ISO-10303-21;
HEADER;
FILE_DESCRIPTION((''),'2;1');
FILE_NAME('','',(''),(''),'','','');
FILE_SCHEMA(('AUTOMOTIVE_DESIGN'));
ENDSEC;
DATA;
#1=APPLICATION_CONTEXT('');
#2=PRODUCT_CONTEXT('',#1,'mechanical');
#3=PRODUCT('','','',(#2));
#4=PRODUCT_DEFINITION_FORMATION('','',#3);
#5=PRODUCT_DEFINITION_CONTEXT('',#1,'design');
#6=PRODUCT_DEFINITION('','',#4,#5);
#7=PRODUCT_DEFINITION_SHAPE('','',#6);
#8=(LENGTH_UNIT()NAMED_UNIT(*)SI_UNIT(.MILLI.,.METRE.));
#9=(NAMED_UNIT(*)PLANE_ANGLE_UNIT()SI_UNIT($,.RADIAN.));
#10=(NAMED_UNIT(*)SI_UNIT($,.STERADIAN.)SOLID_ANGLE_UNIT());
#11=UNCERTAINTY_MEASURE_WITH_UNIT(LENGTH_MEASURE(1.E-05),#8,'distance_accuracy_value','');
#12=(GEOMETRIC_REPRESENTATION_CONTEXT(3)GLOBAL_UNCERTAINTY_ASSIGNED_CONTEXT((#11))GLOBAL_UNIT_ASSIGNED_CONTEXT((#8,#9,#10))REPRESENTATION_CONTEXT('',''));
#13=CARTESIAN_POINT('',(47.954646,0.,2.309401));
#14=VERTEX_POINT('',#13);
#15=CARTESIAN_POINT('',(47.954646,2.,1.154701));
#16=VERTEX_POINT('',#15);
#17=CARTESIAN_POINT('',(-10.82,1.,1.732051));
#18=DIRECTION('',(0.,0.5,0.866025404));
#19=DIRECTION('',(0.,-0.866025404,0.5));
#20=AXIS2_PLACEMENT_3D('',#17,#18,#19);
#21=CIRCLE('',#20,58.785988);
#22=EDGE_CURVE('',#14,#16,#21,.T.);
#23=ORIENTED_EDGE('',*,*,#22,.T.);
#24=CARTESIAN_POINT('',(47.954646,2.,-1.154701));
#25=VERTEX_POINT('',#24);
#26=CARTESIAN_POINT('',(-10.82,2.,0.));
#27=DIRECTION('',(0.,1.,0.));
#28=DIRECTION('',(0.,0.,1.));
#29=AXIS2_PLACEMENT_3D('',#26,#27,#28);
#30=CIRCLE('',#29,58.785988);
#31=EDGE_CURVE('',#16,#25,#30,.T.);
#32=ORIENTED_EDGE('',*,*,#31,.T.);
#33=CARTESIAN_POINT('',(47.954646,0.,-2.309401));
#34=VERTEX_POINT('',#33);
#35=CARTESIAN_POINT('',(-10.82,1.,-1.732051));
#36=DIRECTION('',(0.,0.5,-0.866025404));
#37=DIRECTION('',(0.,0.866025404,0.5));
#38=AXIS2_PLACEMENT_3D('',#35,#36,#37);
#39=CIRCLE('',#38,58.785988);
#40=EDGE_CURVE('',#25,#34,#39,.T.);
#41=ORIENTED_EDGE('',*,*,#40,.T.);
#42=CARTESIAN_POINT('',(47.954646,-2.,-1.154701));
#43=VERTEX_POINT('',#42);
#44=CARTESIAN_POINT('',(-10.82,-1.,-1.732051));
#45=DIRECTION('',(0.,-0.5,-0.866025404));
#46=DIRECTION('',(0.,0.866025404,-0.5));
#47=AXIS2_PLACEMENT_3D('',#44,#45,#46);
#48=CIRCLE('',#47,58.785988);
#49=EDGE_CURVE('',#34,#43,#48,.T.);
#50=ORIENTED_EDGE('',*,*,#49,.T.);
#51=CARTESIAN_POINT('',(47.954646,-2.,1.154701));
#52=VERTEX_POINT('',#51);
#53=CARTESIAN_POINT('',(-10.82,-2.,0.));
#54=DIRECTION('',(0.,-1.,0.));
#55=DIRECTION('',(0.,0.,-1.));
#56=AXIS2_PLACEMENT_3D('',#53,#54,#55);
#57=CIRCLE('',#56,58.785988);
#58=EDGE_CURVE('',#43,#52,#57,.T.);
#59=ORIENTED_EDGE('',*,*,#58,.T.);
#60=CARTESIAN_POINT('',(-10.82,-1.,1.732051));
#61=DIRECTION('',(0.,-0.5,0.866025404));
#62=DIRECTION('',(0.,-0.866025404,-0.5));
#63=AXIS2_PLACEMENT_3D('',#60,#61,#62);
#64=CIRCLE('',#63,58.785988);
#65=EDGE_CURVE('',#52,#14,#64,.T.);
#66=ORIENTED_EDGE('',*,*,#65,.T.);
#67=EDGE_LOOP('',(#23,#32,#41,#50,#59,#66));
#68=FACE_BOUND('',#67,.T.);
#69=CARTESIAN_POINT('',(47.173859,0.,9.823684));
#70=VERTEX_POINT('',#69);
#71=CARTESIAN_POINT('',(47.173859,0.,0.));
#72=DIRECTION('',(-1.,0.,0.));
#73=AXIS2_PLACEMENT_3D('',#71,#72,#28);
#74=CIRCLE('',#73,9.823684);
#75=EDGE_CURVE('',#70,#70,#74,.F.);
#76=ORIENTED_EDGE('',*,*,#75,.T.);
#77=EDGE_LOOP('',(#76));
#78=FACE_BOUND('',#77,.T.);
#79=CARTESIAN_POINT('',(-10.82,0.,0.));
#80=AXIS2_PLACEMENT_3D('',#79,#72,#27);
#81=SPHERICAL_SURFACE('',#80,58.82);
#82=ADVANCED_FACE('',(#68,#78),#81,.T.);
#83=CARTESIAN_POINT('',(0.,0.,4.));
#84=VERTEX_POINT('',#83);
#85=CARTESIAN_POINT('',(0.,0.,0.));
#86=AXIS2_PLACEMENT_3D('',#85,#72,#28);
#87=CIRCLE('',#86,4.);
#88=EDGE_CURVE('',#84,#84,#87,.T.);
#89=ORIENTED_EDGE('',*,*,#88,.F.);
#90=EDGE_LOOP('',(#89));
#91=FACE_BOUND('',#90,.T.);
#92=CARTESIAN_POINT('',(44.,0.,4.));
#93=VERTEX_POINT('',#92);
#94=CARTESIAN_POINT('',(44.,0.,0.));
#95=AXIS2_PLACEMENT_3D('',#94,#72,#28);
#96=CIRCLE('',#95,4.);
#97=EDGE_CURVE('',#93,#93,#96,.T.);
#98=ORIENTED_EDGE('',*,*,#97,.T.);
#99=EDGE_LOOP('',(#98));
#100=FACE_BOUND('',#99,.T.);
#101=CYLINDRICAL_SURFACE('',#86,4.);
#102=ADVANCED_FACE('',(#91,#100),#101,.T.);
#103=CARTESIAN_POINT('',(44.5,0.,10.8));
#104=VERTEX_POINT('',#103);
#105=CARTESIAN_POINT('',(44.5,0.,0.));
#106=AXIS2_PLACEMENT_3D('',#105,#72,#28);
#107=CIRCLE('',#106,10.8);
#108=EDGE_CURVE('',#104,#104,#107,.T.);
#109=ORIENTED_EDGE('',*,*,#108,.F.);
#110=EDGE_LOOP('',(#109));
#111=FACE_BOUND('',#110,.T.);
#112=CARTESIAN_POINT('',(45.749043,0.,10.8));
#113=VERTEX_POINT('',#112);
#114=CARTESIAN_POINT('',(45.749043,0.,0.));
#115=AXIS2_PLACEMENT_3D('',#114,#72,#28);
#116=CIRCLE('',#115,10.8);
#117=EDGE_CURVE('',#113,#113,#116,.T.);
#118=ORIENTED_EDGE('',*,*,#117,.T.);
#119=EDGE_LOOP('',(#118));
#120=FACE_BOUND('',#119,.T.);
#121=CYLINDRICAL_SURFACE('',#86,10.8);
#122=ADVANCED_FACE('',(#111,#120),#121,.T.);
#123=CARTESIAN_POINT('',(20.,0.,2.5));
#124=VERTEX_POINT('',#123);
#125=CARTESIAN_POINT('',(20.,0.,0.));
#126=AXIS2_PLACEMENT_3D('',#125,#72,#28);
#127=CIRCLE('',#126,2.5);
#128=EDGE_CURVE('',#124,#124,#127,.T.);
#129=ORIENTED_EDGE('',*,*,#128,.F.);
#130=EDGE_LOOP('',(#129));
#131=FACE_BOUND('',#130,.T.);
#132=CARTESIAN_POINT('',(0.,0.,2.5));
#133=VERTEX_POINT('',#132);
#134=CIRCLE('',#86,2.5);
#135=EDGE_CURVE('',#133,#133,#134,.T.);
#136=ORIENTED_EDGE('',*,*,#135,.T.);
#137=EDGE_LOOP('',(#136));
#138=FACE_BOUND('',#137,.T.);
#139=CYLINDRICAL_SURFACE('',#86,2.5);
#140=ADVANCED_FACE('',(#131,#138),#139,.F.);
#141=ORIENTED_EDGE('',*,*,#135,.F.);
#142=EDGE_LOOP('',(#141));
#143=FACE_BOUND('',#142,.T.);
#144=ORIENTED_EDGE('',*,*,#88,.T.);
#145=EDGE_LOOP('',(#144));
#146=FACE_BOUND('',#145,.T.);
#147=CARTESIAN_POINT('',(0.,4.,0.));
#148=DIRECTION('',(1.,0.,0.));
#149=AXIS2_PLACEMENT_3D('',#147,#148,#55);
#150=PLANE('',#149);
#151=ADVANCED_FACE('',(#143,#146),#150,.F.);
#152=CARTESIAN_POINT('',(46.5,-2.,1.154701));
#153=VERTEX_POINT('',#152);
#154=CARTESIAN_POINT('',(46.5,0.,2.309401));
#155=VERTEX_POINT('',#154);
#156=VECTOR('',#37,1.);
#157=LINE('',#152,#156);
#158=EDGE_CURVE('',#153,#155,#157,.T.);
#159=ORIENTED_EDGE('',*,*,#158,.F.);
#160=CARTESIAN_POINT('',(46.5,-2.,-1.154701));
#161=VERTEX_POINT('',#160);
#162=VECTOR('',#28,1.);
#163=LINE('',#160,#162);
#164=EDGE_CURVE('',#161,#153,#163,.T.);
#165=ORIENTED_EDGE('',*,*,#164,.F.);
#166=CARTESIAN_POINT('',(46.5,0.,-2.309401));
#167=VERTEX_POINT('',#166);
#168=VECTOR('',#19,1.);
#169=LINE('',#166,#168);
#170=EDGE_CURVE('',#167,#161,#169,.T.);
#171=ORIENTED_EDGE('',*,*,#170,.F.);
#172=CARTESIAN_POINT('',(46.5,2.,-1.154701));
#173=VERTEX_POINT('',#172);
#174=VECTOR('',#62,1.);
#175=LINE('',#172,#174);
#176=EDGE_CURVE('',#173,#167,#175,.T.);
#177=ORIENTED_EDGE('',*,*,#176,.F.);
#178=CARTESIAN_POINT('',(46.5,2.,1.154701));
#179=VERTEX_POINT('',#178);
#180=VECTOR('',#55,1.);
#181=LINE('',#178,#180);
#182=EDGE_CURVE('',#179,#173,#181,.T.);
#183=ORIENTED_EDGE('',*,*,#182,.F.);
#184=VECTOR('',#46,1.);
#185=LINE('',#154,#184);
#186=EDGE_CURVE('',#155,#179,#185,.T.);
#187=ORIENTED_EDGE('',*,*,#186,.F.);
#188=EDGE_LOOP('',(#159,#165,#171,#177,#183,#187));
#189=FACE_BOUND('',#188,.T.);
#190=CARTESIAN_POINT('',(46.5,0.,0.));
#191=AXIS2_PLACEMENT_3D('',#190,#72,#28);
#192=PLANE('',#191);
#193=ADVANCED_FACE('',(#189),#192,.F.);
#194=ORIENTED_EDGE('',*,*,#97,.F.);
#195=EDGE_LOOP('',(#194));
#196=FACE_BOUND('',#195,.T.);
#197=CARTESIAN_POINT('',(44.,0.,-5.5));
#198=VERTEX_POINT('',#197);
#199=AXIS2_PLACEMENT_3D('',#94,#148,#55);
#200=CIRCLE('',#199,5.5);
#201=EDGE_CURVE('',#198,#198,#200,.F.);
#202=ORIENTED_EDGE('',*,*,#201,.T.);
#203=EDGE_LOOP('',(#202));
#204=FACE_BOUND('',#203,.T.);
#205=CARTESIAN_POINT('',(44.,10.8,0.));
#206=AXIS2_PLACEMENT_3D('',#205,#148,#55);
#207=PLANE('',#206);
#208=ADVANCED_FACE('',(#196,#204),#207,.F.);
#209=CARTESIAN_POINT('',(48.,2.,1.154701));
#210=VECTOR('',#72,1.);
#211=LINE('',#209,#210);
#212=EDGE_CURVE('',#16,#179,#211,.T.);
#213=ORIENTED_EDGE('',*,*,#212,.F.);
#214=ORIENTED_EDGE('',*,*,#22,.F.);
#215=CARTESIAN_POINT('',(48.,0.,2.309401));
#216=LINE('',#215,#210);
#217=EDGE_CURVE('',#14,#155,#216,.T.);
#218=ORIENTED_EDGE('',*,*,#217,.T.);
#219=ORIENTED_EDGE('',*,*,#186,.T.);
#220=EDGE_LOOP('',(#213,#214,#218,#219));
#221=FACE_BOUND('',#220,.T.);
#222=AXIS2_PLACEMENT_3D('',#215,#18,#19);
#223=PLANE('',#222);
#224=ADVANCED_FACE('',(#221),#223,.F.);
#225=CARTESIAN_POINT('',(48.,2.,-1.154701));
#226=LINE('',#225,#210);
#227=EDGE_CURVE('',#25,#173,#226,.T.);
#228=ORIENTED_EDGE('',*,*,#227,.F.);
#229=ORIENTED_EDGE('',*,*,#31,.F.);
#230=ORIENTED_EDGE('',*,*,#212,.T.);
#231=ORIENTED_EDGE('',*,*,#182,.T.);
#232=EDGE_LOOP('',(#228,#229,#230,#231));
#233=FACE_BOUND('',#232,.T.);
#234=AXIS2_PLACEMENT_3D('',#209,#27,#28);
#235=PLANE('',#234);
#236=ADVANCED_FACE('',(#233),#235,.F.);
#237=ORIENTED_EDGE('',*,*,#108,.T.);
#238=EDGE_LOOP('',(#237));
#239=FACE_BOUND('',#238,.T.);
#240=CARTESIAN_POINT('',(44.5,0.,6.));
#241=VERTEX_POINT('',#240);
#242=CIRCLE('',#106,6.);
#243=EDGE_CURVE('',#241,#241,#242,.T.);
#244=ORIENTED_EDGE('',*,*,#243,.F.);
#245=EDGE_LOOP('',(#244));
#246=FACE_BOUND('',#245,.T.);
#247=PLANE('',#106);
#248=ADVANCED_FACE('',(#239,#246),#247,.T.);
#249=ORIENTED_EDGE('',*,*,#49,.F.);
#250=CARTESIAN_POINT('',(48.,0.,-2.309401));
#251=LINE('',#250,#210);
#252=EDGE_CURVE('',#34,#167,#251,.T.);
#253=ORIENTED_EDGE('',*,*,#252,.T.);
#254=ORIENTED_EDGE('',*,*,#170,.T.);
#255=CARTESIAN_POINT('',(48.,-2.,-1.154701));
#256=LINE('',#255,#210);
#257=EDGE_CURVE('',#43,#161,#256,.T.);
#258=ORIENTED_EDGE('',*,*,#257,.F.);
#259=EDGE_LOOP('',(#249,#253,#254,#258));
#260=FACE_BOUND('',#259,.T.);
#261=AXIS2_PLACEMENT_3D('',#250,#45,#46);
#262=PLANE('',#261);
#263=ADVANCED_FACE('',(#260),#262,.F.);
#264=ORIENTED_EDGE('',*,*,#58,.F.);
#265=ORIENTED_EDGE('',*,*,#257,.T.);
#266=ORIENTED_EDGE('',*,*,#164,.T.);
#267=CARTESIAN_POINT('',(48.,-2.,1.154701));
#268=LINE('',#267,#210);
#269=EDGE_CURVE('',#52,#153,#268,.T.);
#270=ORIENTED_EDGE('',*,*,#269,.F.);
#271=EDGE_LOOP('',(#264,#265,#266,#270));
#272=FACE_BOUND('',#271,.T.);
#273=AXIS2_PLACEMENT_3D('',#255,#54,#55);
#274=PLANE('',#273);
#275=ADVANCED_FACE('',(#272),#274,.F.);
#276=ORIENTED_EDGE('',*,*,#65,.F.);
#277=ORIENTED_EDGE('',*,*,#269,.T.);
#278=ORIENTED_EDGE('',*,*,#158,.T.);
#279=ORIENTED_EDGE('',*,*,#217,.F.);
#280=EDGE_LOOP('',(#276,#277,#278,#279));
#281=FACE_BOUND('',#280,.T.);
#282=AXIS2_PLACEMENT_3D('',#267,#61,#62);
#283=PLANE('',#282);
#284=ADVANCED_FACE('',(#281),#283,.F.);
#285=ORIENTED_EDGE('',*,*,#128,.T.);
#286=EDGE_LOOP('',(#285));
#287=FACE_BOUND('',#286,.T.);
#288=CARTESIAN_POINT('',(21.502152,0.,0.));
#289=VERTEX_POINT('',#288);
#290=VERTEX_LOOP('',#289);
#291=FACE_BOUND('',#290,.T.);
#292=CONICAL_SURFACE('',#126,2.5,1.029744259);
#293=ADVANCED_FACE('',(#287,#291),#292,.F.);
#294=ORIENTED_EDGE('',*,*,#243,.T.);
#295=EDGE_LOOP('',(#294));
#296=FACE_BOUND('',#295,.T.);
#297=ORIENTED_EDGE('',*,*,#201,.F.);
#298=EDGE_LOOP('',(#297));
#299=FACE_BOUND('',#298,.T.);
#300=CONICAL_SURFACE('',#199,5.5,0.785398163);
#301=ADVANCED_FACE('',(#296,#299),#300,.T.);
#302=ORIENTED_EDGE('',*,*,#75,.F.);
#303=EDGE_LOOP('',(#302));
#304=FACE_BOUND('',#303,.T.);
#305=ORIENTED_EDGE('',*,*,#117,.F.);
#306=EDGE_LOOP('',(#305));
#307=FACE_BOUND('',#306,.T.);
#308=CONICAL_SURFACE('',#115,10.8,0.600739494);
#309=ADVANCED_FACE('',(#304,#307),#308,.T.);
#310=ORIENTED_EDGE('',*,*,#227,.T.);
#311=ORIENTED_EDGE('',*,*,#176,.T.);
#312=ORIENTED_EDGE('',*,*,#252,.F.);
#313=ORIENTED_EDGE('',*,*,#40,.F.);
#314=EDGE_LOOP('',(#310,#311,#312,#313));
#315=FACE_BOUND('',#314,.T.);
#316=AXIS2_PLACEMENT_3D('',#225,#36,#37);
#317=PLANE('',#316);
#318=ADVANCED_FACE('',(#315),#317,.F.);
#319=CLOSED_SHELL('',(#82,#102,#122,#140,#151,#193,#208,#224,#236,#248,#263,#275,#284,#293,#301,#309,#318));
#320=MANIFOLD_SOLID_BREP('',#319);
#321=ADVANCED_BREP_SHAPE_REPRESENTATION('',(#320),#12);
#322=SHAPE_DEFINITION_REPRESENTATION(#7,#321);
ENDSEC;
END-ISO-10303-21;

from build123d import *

# Parameters (mm, degrees)
M6_TAPPED_HOLE1_D     = 5
M6_TAPPED_HOLE1_DEPTH = 20
M6_TAPPED_HOLE1_TIP   = 1.502151548
CHAMFER1_SIZE         = 1.25095704
SKETCH8_R             = 10.8
SKETCH8_R_2           = 6
CUT_EXTRUDE2_DEPTH    = 0.5
CHAMFER2_SIZE         = 0.5
CUT_EXTRUDE3_START    = -2
CUT_EXTRUDE3_DEPTH    = 46.048166808


# Some blends are built 0.0001 mm under size
with BuildPart() as part:
    # Sketch1 → Revolve1 (revolve)
    with BuildSketch(Plane.XY, mode=Mode.PRIVATE) as revolve1_sk:
        with BuildLine():
            Line((0, 0), (48, 0))
            ThreePointArc((48, 0), (47.749466448, 5.423098745), (47, 10.8))
            Line((47, 10.8), (44, 10.8))
            Line((44, 10.8), (44, 4))
            Line((44, 4), (0, 4))
            Line((0, 4), (0, 0))
        make_face()
    revolve(revolve1_sk.sketch.rotate(Axis((0, 0, 0), (1, 0, 0)), 90), axis=Axis((0, 0, 0), (1, 0, 0)))

    # M6 Tapped Hole1
    with Locations(Plane.ZY):
        with Locations((0, 0)):
            Hole(M6_TAPPED_HOLE1_D / 2, depth=M6_TAPPED_HOLE1_DEPTH)
            with Locations((0, 0, -(M6_TAPPED_HOLE1_DEPTH + M6_TAPPED_HOLE1_TIP / 2))):  # 118° drill point
                Cone(0, M6_TAPPED_HOLE1_D / 2, M6_TAPPED_HOLE1_TIP, mode=Mode.SUBTRACT)

    # Chamfer1
    # the kernel refuses this chamfer: 1.25095704, 1 mm, written as the material it takes off along each edge
    with BuildSketch(Plane(origin=(47, 0, 0), x_dir=(0, 0, 1), z_dir=(0, 1, 0))) as chamfer1_piece_1:
        with BuildLine():
            Line((9.823683565, 0.173858651), (10.8, -CHAMFER1_SIZE))
            Line((10.8, -CHAMFER1_SIZE), (10.8, 0))
            ThreePointArc((10.8, 0), (10.294942592, 0.092058822), (9.823683565, 0.173858651))
        make_face()
    revolve(axis=Axis((47, 0, 0), (1, 0, 0)), mode=Mode.SUBTRACT)

    # Sketch8 → Cut-Extrude2 (cut)
    with BuildSketch(Plane.ZY.offset(-44)):
        Circle(SKETCH8_R)
        Circle(SKETCH8_R_2, mode=Mode.SUBTRACT)
    extrude(amount=-CUT_EXTRUDE2_DEPTH, mode=Mode.SUBTRACT)

    # Chamfer2
    chamfer2_edges = [part.edges().sort_by_distance(p)[0] for p in [
        (44, 0, -6),
    ]]
    chamfer(chamfer2_edges, length=CHAMFER2_SIZE - 0.0001)  # a hair under: the kernel refuses the full size

    # Sketch9 → Cut-Extrude3 (cut, through all)
    with BuildSketch(Plane.ZY.offset(-44.5).offset(CUT_EXTRUDE3_START)):
        Polygon((1.154700538, -2), (2.309401077, 0), (1.154700538, 2), (-1.154700538, 2), (-2.309401077, 0), (-1.154700538, -2), align=None)
    extrude(amount=-CUT_EXTRUDE3_DEPTH, mode=Mode.SUBTRACT)


solid = part.part
